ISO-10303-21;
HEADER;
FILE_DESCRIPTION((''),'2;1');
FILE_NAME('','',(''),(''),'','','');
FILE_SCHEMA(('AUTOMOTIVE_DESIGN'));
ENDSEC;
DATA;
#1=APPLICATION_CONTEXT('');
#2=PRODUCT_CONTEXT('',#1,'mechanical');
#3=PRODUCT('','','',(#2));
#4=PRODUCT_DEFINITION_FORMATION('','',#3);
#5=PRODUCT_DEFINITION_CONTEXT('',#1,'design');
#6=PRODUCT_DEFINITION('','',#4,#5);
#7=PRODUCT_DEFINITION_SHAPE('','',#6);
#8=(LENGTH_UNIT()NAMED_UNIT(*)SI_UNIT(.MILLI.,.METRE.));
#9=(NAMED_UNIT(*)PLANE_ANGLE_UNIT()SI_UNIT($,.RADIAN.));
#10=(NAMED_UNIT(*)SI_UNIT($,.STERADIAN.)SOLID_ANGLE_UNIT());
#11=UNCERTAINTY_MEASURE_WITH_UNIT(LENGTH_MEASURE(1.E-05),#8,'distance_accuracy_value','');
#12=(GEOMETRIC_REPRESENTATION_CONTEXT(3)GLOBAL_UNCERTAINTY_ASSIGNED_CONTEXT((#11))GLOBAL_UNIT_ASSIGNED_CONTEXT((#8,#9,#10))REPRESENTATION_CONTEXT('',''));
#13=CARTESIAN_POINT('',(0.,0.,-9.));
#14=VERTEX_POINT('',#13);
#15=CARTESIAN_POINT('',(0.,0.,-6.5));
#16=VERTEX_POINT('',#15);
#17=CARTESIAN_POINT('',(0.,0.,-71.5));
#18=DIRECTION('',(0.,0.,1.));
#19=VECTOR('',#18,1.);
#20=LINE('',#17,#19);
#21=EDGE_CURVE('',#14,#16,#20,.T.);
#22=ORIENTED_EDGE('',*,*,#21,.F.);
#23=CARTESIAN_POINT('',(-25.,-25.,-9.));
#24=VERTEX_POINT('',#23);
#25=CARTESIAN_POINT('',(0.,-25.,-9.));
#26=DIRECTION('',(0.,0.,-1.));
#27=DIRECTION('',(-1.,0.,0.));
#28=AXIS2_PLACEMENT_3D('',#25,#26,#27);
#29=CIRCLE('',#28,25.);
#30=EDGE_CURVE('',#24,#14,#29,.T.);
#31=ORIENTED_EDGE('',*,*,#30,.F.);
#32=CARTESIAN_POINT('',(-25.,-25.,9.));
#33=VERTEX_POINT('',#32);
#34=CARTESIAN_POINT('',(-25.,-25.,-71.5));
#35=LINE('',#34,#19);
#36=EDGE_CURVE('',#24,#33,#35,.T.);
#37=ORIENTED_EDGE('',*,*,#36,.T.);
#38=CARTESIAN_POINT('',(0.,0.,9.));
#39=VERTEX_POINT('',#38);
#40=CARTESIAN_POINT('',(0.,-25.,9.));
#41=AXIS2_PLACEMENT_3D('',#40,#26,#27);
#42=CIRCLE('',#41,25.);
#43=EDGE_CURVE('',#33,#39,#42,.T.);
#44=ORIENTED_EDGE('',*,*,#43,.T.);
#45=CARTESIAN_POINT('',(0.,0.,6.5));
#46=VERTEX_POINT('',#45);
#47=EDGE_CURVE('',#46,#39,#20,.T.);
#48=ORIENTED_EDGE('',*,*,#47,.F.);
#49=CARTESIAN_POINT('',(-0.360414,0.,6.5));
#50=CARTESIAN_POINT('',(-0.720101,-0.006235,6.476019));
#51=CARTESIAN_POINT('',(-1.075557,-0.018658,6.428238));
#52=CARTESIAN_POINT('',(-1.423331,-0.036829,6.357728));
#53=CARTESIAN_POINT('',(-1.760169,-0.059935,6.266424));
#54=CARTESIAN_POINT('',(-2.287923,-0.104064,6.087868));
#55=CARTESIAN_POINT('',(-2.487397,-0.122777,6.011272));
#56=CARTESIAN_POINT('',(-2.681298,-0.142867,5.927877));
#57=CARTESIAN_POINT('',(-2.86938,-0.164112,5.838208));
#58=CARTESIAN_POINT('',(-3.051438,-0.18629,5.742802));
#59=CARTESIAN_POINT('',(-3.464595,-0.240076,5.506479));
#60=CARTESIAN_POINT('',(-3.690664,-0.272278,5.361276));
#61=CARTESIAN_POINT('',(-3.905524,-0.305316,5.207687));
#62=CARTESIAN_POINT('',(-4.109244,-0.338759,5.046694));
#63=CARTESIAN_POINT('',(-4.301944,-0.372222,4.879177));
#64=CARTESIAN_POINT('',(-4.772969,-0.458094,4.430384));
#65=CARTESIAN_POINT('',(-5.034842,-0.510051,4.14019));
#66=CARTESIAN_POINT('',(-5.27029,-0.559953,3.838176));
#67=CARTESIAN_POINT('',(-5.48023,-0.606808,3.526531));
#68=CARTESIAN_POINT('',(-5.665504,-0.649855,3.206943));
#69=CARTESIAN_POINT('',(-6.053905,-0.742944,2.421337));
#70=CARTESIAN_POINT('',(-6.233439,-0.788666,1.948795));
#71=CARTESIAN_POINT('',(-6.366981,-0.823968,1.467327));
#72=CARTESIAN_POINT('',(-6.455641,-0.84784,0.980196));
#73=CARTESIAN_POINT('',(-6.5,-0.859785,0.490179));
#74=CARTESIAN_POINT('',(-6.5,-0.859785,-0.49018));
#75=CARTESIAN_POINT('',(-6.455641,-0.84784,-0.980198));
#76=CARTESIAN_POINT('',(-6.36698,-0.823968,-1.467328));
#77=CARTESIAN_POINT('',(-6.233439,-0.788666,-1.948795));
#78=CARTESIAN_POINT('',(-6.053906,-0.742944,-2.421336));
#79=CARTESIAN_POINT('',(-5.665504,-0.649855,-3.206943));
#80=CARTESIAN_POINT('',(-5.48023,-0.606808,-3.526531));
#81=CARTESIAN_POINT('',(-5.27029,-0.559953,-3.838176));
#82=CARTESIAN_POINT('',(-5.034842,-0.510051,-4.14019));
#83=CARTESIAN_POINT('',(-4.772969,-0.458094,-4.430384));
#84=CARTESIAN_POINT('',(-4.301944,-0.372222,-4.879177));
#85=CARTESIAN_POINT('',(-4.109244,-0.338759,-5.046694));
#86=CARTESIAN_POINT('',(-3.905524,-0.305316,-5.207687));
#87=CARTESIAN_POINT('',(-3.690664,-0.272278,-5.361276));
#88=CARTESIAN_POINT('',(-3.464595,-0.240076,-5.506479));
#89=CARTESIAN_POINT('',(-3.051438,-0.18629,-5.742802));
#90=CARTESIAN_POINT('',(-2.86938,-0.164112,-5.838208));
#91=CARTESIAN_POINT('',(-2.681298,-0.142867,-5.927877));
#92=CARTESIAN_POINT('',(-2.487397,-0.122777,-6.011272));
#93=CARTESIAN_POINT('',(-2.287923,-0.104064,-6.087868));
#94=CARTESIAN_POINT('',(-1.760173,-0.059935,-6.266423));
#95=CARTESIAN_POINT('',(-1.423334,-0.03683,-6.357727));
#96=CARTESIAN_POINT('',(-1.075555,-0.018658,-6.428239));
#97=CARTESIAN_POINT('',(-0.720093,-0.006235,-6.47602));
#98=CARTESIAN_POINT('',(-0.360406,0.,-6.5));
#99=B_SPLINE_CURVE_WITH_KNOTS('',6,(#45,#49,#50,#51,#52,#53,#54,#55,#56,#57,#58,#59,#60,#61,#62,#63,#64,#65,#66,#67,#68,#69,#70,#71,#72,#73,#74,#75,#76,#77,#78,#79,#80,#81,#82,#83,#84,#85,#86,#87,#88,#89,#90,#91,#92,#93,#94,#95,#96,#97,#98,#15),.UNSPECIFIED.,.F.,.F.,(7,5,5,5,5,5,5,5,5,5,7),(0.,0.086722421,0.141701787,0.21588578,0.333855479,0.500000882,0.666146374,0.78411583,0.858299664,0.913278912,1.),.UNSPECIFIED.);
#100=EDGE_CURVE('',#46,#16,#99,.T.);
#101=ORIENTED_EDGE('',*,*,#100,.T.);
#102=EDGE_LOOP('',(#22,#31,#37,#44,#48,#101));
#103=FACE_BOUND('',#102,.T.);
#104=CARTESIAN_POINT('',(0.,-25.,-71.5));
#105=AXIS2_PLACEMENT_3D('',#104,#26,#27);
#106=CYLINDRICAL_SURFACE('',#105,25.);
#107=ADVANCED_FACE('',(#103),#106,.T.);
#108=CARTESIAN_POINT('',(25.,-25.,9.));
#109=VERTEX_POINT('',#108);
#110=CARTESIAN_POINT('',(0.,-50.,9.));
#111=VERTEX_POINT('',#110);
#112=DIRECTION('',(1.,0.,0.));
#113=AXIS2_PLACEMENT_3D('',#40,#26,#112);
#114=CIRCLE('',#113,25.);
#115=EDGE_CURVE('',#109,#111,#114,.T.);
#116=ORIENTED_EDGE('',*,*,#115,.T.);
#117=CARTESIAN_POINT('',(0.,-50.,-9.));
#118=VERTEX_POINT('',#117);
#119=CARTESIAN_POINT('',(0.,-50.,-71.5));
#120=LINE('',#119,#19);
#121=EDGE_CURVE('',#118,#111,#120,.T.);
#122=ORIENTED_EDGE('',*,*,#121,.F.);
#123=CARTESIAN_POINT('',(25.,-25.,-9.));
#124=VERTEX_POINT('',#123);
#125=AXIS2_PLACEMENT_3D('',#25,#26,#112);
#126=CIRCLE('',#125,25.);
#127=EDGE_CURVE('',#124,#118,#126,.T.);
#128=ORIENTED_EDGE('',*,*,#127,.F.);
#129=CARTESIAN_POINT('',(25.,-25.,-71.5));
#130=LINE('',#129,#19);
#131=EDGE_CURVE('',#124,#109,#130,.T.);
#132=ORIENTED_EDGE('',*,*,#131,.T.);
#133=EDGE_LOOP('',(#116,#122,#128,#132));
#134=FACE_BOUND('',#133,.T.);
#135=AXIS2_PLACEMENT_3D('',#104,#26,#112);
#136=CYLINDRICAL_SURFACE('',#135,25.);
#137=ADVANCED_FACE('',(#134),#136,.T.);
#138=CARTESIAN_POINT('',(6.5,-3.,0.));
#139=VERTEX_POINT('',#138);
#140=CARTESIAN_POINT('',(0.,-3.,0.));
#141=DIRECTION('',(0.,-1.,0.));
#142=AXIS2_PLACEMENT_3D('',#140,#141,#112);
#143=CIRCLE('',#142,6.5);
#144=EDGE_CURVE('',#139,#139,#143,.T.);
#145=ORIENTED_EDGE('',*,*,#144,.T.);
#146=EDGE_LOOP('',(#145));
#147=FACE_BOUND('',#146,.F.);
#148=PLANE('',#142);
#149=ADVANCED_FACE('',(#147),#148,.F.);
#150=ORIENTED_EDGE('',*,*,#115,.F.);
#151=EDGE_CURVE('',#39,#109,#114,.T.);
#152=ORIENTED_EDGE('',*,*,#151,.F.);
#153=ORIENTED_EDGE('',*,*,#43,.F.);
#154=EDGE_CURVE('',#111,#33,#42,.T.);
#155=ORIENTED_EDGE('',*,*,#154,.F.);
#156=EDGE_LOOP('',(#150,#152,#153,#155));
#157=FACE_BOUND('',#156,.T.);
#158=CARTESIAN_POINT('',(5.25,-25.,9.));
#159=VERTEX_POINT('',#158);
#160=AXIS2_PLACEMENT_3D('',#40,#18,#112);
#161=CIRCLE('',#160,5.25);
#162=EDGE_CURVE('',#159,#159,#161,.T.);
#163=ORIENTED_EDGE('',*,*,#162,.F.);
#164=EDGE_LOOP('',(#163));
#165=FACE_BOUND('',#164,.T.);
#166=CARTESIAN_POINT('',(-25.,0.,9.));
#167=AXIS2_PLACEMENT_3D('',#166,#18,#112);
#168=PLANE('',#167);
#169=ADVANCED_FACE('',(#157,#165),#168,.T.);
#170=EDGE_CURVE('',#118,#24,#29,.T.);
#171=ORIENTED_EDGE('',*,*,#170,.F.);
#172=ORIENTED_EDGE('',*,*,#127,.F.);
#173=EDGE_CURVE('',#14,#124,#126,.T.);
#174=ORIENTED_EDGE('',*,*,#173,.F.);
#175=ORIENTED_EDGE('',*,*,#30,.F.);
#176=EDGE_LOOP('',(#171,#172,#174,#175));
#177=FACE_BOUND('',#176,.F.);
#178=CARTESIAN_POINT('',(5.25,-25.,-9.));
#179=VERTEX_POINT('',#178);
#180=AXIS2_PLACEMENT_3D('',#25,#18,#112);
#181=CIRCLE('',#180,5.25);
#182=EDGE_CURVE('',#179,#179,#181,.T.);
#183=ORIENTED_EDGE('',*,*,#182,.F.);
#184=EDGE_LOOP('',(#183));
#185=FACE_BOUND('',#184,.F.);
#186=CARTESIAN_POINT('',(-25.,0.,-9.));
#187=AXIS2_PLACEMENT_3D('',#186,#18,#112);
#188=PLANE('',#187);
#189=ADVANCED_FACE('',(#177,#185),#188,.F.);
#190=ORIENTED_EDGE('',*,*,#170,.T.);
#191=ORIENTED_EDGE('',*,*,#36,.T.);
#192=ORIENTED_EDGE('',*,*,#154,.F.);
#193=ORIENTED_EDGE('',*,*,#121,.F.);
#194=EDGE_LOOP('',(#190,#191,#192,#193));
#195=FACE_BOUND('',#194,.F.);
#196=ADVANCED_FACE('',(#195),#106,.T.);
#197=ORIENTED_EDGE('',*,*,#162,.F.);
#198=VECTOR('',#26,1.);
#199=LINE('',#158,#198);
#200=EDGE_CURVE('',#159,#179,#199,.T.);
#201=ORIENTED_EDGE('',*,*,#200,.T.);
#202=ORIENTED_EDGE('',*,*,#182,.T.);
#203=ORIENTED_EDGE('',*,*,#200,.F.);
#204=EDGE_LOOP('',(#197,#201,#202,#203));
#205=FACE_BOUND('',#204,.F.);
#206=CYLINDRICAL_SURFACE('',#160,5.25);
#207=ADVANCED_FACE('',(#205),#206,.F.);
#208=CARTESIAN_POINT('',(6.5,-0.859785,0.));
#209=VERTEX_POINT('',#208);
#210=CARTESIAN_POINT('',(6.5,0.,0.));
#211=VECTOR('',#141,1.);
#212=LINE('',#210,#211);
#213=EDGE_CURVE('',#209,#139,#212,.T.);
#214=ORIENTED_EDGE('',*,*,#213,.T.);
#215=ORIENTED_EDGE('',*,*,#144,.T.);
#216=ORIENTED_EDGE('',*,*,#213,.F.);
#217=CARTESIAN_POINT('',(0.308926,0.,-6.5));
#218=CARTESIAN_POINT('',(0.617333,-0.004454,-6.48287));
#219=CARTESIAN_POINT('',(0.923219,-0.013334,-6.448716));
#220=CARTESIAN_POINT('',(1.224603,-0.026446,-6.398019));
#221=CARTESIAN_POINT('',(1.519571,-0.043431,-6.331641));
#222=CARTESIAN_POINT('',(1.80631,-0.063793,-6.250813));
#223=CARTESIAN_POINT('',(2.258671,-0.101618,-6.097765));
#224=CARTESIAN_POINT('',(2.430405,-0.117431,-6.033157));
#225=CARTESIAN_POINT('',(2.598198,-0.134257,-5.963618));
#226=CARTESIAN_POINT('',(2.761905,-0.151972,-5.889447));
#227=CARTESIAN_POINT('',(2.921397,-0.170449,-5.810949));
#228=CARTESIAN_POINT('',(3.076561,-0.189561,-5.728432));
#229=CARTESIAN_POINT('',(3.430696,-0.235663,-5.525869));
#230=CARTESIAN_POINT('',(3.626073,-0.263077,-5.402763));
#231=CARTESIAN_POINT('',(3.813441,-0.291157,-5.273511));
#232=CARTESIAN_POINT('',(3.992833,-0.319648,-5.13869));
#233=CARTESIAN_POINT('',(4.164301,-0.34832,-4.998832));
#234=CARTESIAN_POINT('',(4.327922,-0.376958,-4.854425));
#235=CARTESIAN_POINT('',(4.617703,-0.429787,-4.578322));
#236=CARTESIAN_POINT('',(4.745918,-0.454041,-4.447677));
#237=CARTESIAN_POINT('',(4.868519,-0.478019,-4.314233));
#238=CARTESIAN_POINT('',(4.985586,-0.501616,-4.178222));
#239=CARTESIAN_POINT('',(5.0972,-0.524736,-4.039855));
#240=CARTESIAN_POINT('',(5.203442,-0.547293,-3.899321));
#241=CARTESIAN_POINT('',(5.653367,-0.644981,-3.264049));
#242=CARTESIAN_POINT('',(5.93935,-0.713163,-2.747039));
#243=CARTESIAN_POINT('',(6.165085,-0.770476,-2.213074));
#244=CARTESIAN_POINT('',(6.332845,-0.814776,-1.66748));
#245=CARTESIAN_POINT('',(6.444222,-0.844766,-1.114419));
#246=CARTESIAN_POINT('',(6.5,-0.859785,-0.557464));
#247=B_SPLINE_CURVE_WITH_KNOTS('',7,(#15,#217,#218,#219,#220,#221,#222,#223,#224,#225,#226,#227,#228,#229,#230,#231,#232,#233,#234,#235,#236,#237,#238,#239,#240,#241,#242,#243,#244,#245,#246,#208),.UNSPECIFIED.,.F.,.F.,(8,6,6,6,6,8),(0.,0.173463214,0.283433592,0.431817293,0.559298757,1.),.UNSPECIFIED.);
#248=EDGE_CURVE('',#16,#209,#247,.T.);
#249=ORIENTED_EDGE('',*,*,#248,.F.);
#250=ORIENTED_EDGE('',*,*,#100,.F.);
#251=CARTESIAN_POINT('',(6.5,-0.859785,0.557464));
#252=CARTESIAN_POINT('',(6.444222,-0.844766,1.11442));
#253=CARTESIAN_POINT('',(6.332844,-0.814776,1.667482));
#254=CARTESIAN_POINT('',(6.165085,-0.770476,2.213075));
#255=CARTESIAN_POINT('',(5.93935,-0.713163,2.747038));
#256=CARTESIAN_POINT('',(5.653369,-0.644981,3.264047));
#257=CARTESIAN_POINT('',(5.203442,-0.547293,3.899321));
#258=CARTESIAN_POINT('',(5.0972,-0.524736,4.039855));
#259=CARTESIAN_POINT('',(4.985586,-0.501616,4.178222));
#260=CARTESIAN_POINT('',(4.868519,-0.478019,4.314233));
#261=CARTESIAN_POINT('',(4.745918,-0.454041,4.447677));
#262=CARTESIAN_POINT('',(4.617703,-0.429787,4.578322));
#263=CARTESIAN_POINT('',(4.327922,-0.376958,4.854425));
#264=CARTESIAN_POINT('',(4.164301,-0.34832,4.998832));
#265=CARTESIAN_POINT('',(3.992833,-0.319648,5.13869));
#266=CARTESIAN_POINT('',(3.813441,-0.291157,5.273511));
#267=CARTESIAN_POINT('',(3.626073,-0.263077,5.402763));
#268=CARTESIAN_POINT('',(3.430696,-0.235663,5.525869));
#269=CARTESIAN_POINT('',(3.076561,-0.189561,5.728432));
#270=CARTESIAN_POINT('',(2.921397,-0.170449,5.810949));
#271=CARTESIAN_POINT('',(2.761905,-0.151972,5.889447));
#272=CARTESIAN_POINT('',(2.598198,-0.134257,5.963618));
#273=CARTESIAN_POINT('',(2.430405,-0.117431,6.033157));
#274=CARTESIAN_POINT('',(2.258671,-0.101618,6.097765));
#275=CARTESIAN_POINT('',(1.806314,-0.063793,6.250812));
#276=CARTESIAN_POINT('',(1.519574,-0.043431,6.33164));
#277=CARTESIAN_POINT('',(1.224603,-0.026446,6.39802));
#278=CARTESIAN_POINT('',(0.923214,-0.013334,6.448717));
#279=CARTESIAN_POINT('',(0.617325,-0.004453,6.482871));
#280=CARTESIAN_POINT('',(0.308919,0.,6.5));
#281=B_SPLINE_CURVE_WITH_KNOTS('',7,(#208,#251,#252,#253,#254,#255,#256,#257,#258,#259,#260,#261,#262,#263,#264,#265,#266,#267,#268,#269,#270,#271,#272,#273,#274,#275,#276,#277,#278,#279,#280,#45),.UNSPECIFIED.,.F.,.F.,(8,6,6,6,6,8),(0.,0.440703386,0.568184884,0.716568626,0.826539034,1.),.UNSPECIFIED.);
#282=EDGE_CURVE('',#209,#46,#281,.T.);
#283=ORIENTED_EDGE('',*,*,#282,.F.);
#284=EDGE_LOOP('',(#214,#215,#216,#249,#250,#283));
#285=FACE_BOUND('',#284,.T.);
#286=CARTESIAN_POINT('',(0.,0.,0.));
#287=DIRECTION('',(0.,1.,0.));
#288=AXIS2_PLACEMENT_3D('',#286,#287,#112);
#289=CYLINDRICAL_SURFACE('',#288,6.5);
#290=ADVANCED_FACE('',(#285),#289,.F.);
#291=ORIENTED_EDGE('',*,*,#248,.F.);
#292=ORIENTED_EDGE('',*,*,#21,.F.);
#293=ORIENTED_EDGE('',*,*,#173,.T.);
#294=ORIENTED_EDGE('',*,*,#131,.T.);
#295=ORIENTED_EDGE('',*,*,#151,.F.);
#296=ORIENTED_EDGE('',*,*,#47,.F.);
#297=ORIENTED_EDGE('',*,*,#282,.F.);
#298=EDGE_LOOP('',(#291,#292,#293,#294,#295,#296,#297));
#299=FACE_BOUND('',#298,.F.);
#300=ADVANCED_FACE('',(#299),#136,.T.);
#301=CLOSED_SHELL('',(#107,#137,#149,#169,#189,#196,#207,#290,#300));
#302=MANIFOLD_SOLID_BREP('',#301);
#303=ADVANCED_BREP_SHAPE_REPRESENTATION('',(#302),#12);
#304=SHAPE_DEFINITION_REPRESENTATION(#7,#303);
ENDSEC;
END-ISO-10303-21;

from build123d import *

# Parameters (mm, degrees)
F0_W        = 50
F0_H        = 18
F0_R        = 6.5
F1_DEPTH    = 50
F2_R        = 6.5
F3_DEPTH    = 3
F4_T1_DEPTH = 143
F5_R        = 5.25
F6_DEPTH    = 25


# Not quite as in the source:
# - a fillet or chamfer that OpenCascade refuses, or shapes differently, is made with other operations: its cross-section is extruded or revolved along the edge and cut away or added


with BuildPart() as f1:
    # F0 (on Front) → F1 (new body)
    with BuildSketch(Plane.XZ):
        Rectangle(F0_W, F0_H)
        Circle(F0_R, mode=Mode.SUBTRACT)
        Circle(F0_R)
    extrude(amount=F1_DEPTH)

    # F2 (on Front) → F3 (cut)
    with BuildSketch(Plane.XZ):
        Circle(F2_R)
    extrude(amount=F3_DEPTH, mode=Mode.SUBTRACT)

    # F4: fillet of radius 25 on 4 edges, made by hand

    # F4_s2 → F4_t1 (cut)
    with BuildSketch(Plane.XY.offset(-71.5)):
        with BuildLine():
            ThreePointArc((-25, -25), (-17.6776695297, -7.3223304703), (0, 0))
            Line((0, 0), (-25, 0))
            Line((-25, 0), (-25, -25))
        make_face()
        with BuildLine():
            ThreePointArc((25, -25), (17.6776695297, -7.3223304703), (0, 0))
            Line((0, 0), (25, 0))
            Line((25, 0), (25, -25))
        make_face()
        with BuildLine():
            ThreePointArc((25, -25), (17.6776695297, -42.6776695297), (0, -50))
            Line((0, -50), (25, -50))
            Line((25, -50), (25, -25))
        make_face()
        with BuildLine():
            ThreePointArc((-25, -25), (-17.6776695297, -42.6776695297), (0, -50))
            Line((0, -50), (-25, -50))
            Line((-25, -50), (-25, -25))
        make_face()
    extrude(amount=F4_T1_DEPTH, mode=Mode.SUBTRACT)

    # F5 (on face) → F6 (cut)
    with BuildSketch(Plane.XY.offset(9)):
        with Locations((0, -25)):
            Circle(F5_R)
    extrude(amount=-F6_DEPTH, mode=Mode.SUBTRACT)


solid = f1.part
